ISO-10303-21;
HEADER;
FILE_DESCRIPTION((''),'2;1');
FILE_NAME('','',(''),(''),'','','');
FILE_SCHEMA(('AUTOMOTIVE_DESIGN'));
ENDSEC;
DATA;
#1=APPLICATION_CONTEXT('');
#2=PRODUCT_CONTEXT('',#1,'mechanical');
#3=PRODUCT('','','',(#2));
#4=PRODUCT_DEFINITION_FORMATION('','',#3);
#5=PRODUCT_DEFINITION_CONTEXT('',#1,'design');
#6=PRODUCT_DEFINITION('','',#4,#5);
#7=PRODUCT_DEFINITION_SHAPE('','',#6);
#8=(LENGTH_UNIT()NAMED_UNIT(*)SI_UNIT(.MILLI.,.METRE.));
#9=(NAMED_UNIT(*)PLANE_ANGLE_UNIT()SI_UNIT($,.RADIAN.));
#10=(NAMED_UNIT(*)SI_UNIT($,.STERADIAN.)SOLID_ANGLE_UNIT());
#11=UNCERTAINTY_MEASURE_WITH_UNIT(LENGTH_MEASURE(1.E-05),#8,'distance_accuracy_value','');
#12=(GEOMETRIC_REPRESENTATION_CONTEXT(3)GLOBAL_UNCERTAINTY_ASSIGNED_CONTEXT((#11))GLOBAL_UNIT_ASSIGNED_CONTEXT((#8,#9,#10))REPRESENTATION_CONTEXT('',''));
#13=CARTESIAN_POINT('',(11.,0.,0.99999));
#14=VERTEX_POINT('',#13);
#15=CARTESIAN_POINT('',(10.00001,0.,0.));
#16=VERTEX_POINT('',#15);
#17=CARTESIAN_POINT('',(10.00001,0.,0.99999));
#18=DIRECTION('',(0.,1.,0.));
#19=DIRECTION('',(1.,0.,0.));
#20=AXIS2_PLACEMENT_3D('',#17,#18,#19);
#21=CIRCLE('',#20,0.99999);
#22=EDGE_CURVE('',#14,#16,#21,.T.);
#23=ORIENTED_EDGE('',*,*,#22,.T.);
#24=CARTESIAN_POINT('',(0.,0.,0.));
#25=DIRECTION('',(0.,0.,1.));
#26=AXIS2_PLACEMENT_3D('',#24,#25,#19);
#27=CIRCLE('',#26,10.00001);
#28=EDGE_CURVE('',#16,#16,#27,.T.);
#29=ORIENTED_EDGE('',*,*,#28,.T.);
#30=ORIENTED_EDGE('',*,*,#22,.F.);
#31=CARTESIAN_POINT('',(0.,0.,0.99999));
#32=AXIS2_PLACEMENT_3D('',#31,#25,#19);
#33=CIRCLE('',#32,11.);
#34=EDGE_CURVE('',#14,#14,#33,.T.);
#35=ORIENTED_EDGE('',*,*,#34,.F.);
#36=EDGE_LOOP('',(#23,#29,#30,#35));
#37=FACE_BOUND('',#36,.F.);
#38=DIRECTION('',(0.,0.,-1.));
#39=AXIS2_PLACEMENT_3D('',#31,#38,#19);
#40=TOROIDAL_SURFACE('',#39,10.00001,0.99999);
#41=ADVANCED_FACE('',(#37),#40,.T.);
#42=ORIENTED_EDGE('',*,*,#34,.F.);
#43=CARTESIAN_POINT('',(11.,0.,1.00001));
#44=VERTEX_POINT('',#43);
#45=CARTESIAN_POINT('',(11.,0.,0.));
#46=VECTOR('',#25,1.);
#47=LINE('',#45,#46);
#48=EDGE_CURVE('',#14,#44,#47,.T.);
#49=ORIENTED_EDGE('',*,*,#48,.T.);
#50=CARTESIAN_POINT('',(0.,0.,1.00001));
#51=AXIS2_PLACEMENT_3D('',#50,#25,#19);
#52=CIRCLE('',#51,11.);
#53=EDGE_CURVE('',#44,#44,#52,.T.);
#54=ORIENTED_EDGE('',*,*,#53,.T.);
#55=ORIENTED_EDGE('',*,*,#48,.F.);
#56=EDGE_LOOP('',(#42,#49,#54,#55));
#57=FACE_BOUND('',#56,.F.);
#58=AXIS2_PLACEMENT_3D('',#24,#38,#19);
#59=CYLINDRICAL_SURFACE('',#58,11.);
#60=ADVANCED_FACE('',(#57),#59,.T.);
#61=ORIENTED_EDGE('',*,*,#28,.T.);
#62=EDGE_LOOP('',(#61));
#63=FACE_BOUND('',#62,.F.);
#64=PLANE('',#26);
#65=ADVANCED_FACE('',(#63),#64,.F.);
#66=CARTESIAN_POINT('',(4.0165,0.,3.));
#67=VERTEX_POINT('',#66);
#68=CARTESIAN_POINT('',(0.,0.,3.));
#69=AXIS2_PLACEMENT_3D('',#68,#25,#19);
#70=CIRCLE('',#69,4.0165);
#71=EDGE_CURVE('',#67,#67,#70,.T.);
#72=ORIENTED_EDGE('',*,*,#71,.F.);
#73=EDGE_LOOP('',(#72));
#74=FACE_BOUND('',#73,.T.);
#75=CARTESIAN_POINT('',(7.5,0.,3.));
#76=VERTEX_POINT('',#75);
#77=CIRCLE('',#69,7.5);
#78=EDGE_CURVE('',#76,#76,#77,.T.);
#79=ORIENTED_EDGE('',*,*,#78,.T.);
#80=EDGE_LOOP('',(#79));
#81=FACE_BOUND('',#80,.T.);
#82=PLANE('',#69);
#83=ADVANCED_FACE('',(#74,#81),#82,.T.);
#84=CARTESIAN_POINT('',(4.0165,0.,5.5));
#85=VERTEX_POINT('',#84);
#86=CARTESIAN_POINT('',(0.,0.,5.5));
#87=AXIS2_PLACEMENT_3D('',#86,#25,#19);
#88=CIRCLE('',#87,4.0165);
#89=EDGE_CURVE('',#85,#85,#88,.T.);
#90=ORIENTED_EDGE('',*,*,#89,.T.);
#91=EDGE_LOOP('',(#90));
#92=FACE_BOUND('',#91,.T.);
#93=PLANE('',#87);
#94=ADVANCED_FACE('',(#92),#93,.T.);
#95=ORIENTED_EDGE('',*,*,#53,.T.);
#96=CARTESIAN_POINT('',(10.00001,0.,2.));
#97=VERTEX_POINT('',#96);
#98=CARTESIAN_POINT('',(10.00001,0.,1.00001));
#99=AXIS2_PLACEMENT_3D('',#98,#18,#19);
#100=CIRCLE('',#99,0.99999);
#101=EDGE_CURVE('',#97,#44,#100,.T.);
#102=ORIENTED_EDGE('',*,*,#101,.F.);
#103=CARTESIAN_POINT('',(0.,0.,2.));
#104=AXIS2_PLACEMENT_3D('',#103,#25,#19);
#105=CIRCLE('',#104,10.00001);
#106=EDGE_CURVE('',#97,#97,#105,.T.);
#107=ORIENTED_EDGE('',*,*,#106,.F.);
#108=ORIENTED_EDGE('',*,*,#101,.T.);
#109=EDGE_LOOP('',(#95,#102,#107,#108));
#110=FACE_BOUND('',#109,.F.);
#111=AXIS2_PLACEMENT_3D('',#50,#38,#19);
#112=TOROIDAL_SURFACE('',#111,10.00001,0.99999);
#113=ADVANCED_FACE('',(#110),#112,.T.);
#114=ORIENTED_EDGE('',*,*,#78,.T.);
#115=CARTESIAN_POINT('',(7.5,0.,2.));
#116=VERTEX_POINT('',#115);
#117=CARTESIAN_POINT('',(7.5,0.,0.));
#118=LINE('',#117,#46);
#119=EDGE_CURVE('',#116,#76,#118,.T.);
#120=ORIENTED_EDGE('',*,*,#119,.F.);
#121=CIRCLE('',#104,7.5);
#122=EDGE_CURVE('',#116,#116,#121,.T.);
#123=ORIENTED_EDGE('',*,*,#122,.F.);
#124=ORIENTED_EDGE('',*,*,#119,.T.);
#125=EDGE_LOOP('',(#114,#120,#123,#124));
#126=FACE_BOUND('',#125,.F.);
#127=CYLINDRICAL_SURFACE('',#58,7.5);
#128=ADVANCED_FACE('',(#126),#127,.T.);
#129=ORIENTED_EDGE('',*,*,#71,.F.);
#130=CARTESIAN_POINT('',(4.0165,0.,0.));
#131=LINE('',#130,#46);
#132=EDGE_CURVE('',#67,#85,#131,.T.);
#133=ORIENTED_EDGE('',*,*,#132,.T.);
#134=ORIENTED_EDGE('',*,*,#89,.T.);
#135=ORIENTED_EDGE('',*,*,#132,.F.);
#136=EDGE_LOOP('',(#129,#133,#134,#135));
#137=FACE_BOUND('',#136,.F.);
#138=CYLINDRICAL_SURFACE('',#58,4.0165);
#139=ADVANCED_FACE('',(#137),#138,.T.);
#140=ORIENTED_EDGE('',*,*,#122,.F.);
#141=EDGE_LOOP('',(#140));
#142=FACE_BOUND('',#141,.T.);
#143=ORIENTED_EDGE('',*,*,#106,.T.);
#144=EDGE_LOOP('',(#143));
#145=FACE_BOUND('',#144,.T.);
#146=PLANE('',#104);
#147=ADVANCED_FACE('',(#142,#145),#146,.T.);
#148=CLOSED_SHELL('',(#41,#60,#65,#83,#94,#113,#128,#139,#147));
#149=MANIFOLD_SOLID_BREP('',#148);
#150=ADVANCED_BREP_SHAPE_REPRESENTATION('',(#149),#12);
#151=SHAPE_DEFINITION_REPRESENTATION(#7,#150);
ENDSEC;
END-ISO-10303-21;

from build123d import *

# Parameters (mm, degrees)
F0_R     = 11
F0_R_2   = 7.5
F1_DEPTH = 2
F0_R_3   = 4.0165
F2_DEPTH = 3
F3_DEPTH = 5.5
F4_R     = 0.99999


# Not quite as in the source:
# - a fillet or chamfer is up to 0.001 mm smaller than in the source, because OpenCascade refuses the exact size


with BuildPart() as f1:
    # F0 (on Top) → F1 (new body)
    with BuildSketch(Plane.XY):
        Circle(F0_R)
        Circle(F0_R_2, mode=Mode.SUBTRACT)
    extrude(amount=F1_DEPTH)

    # F0 (on Top) → F2 (join)
    with BuildSketch(Plane.XY):
        Circle(F0_R_2)
        Circle(F0_R_3, mode=Mode.SUBTRACT)
    extrude(amount=F2_DEPTH)

    # F0 (on Top) → F3 (join)
    with BuildSketch(Plane.XY):
        Circle(F0_R_3)
    extrude(amount=F3_DEPTH)

    # F4 (radius 1 in the source; OpenCascade refuses exactly that, so slightly less here)
    f4_edges = [f1.edges().sort_by_distance(p)[0] for p in [
        (-11, 0, 2),
        (-11, 0, 0),
    ]]
    fillet(f4_edges, radius=F4_R)


solid = f1.part
